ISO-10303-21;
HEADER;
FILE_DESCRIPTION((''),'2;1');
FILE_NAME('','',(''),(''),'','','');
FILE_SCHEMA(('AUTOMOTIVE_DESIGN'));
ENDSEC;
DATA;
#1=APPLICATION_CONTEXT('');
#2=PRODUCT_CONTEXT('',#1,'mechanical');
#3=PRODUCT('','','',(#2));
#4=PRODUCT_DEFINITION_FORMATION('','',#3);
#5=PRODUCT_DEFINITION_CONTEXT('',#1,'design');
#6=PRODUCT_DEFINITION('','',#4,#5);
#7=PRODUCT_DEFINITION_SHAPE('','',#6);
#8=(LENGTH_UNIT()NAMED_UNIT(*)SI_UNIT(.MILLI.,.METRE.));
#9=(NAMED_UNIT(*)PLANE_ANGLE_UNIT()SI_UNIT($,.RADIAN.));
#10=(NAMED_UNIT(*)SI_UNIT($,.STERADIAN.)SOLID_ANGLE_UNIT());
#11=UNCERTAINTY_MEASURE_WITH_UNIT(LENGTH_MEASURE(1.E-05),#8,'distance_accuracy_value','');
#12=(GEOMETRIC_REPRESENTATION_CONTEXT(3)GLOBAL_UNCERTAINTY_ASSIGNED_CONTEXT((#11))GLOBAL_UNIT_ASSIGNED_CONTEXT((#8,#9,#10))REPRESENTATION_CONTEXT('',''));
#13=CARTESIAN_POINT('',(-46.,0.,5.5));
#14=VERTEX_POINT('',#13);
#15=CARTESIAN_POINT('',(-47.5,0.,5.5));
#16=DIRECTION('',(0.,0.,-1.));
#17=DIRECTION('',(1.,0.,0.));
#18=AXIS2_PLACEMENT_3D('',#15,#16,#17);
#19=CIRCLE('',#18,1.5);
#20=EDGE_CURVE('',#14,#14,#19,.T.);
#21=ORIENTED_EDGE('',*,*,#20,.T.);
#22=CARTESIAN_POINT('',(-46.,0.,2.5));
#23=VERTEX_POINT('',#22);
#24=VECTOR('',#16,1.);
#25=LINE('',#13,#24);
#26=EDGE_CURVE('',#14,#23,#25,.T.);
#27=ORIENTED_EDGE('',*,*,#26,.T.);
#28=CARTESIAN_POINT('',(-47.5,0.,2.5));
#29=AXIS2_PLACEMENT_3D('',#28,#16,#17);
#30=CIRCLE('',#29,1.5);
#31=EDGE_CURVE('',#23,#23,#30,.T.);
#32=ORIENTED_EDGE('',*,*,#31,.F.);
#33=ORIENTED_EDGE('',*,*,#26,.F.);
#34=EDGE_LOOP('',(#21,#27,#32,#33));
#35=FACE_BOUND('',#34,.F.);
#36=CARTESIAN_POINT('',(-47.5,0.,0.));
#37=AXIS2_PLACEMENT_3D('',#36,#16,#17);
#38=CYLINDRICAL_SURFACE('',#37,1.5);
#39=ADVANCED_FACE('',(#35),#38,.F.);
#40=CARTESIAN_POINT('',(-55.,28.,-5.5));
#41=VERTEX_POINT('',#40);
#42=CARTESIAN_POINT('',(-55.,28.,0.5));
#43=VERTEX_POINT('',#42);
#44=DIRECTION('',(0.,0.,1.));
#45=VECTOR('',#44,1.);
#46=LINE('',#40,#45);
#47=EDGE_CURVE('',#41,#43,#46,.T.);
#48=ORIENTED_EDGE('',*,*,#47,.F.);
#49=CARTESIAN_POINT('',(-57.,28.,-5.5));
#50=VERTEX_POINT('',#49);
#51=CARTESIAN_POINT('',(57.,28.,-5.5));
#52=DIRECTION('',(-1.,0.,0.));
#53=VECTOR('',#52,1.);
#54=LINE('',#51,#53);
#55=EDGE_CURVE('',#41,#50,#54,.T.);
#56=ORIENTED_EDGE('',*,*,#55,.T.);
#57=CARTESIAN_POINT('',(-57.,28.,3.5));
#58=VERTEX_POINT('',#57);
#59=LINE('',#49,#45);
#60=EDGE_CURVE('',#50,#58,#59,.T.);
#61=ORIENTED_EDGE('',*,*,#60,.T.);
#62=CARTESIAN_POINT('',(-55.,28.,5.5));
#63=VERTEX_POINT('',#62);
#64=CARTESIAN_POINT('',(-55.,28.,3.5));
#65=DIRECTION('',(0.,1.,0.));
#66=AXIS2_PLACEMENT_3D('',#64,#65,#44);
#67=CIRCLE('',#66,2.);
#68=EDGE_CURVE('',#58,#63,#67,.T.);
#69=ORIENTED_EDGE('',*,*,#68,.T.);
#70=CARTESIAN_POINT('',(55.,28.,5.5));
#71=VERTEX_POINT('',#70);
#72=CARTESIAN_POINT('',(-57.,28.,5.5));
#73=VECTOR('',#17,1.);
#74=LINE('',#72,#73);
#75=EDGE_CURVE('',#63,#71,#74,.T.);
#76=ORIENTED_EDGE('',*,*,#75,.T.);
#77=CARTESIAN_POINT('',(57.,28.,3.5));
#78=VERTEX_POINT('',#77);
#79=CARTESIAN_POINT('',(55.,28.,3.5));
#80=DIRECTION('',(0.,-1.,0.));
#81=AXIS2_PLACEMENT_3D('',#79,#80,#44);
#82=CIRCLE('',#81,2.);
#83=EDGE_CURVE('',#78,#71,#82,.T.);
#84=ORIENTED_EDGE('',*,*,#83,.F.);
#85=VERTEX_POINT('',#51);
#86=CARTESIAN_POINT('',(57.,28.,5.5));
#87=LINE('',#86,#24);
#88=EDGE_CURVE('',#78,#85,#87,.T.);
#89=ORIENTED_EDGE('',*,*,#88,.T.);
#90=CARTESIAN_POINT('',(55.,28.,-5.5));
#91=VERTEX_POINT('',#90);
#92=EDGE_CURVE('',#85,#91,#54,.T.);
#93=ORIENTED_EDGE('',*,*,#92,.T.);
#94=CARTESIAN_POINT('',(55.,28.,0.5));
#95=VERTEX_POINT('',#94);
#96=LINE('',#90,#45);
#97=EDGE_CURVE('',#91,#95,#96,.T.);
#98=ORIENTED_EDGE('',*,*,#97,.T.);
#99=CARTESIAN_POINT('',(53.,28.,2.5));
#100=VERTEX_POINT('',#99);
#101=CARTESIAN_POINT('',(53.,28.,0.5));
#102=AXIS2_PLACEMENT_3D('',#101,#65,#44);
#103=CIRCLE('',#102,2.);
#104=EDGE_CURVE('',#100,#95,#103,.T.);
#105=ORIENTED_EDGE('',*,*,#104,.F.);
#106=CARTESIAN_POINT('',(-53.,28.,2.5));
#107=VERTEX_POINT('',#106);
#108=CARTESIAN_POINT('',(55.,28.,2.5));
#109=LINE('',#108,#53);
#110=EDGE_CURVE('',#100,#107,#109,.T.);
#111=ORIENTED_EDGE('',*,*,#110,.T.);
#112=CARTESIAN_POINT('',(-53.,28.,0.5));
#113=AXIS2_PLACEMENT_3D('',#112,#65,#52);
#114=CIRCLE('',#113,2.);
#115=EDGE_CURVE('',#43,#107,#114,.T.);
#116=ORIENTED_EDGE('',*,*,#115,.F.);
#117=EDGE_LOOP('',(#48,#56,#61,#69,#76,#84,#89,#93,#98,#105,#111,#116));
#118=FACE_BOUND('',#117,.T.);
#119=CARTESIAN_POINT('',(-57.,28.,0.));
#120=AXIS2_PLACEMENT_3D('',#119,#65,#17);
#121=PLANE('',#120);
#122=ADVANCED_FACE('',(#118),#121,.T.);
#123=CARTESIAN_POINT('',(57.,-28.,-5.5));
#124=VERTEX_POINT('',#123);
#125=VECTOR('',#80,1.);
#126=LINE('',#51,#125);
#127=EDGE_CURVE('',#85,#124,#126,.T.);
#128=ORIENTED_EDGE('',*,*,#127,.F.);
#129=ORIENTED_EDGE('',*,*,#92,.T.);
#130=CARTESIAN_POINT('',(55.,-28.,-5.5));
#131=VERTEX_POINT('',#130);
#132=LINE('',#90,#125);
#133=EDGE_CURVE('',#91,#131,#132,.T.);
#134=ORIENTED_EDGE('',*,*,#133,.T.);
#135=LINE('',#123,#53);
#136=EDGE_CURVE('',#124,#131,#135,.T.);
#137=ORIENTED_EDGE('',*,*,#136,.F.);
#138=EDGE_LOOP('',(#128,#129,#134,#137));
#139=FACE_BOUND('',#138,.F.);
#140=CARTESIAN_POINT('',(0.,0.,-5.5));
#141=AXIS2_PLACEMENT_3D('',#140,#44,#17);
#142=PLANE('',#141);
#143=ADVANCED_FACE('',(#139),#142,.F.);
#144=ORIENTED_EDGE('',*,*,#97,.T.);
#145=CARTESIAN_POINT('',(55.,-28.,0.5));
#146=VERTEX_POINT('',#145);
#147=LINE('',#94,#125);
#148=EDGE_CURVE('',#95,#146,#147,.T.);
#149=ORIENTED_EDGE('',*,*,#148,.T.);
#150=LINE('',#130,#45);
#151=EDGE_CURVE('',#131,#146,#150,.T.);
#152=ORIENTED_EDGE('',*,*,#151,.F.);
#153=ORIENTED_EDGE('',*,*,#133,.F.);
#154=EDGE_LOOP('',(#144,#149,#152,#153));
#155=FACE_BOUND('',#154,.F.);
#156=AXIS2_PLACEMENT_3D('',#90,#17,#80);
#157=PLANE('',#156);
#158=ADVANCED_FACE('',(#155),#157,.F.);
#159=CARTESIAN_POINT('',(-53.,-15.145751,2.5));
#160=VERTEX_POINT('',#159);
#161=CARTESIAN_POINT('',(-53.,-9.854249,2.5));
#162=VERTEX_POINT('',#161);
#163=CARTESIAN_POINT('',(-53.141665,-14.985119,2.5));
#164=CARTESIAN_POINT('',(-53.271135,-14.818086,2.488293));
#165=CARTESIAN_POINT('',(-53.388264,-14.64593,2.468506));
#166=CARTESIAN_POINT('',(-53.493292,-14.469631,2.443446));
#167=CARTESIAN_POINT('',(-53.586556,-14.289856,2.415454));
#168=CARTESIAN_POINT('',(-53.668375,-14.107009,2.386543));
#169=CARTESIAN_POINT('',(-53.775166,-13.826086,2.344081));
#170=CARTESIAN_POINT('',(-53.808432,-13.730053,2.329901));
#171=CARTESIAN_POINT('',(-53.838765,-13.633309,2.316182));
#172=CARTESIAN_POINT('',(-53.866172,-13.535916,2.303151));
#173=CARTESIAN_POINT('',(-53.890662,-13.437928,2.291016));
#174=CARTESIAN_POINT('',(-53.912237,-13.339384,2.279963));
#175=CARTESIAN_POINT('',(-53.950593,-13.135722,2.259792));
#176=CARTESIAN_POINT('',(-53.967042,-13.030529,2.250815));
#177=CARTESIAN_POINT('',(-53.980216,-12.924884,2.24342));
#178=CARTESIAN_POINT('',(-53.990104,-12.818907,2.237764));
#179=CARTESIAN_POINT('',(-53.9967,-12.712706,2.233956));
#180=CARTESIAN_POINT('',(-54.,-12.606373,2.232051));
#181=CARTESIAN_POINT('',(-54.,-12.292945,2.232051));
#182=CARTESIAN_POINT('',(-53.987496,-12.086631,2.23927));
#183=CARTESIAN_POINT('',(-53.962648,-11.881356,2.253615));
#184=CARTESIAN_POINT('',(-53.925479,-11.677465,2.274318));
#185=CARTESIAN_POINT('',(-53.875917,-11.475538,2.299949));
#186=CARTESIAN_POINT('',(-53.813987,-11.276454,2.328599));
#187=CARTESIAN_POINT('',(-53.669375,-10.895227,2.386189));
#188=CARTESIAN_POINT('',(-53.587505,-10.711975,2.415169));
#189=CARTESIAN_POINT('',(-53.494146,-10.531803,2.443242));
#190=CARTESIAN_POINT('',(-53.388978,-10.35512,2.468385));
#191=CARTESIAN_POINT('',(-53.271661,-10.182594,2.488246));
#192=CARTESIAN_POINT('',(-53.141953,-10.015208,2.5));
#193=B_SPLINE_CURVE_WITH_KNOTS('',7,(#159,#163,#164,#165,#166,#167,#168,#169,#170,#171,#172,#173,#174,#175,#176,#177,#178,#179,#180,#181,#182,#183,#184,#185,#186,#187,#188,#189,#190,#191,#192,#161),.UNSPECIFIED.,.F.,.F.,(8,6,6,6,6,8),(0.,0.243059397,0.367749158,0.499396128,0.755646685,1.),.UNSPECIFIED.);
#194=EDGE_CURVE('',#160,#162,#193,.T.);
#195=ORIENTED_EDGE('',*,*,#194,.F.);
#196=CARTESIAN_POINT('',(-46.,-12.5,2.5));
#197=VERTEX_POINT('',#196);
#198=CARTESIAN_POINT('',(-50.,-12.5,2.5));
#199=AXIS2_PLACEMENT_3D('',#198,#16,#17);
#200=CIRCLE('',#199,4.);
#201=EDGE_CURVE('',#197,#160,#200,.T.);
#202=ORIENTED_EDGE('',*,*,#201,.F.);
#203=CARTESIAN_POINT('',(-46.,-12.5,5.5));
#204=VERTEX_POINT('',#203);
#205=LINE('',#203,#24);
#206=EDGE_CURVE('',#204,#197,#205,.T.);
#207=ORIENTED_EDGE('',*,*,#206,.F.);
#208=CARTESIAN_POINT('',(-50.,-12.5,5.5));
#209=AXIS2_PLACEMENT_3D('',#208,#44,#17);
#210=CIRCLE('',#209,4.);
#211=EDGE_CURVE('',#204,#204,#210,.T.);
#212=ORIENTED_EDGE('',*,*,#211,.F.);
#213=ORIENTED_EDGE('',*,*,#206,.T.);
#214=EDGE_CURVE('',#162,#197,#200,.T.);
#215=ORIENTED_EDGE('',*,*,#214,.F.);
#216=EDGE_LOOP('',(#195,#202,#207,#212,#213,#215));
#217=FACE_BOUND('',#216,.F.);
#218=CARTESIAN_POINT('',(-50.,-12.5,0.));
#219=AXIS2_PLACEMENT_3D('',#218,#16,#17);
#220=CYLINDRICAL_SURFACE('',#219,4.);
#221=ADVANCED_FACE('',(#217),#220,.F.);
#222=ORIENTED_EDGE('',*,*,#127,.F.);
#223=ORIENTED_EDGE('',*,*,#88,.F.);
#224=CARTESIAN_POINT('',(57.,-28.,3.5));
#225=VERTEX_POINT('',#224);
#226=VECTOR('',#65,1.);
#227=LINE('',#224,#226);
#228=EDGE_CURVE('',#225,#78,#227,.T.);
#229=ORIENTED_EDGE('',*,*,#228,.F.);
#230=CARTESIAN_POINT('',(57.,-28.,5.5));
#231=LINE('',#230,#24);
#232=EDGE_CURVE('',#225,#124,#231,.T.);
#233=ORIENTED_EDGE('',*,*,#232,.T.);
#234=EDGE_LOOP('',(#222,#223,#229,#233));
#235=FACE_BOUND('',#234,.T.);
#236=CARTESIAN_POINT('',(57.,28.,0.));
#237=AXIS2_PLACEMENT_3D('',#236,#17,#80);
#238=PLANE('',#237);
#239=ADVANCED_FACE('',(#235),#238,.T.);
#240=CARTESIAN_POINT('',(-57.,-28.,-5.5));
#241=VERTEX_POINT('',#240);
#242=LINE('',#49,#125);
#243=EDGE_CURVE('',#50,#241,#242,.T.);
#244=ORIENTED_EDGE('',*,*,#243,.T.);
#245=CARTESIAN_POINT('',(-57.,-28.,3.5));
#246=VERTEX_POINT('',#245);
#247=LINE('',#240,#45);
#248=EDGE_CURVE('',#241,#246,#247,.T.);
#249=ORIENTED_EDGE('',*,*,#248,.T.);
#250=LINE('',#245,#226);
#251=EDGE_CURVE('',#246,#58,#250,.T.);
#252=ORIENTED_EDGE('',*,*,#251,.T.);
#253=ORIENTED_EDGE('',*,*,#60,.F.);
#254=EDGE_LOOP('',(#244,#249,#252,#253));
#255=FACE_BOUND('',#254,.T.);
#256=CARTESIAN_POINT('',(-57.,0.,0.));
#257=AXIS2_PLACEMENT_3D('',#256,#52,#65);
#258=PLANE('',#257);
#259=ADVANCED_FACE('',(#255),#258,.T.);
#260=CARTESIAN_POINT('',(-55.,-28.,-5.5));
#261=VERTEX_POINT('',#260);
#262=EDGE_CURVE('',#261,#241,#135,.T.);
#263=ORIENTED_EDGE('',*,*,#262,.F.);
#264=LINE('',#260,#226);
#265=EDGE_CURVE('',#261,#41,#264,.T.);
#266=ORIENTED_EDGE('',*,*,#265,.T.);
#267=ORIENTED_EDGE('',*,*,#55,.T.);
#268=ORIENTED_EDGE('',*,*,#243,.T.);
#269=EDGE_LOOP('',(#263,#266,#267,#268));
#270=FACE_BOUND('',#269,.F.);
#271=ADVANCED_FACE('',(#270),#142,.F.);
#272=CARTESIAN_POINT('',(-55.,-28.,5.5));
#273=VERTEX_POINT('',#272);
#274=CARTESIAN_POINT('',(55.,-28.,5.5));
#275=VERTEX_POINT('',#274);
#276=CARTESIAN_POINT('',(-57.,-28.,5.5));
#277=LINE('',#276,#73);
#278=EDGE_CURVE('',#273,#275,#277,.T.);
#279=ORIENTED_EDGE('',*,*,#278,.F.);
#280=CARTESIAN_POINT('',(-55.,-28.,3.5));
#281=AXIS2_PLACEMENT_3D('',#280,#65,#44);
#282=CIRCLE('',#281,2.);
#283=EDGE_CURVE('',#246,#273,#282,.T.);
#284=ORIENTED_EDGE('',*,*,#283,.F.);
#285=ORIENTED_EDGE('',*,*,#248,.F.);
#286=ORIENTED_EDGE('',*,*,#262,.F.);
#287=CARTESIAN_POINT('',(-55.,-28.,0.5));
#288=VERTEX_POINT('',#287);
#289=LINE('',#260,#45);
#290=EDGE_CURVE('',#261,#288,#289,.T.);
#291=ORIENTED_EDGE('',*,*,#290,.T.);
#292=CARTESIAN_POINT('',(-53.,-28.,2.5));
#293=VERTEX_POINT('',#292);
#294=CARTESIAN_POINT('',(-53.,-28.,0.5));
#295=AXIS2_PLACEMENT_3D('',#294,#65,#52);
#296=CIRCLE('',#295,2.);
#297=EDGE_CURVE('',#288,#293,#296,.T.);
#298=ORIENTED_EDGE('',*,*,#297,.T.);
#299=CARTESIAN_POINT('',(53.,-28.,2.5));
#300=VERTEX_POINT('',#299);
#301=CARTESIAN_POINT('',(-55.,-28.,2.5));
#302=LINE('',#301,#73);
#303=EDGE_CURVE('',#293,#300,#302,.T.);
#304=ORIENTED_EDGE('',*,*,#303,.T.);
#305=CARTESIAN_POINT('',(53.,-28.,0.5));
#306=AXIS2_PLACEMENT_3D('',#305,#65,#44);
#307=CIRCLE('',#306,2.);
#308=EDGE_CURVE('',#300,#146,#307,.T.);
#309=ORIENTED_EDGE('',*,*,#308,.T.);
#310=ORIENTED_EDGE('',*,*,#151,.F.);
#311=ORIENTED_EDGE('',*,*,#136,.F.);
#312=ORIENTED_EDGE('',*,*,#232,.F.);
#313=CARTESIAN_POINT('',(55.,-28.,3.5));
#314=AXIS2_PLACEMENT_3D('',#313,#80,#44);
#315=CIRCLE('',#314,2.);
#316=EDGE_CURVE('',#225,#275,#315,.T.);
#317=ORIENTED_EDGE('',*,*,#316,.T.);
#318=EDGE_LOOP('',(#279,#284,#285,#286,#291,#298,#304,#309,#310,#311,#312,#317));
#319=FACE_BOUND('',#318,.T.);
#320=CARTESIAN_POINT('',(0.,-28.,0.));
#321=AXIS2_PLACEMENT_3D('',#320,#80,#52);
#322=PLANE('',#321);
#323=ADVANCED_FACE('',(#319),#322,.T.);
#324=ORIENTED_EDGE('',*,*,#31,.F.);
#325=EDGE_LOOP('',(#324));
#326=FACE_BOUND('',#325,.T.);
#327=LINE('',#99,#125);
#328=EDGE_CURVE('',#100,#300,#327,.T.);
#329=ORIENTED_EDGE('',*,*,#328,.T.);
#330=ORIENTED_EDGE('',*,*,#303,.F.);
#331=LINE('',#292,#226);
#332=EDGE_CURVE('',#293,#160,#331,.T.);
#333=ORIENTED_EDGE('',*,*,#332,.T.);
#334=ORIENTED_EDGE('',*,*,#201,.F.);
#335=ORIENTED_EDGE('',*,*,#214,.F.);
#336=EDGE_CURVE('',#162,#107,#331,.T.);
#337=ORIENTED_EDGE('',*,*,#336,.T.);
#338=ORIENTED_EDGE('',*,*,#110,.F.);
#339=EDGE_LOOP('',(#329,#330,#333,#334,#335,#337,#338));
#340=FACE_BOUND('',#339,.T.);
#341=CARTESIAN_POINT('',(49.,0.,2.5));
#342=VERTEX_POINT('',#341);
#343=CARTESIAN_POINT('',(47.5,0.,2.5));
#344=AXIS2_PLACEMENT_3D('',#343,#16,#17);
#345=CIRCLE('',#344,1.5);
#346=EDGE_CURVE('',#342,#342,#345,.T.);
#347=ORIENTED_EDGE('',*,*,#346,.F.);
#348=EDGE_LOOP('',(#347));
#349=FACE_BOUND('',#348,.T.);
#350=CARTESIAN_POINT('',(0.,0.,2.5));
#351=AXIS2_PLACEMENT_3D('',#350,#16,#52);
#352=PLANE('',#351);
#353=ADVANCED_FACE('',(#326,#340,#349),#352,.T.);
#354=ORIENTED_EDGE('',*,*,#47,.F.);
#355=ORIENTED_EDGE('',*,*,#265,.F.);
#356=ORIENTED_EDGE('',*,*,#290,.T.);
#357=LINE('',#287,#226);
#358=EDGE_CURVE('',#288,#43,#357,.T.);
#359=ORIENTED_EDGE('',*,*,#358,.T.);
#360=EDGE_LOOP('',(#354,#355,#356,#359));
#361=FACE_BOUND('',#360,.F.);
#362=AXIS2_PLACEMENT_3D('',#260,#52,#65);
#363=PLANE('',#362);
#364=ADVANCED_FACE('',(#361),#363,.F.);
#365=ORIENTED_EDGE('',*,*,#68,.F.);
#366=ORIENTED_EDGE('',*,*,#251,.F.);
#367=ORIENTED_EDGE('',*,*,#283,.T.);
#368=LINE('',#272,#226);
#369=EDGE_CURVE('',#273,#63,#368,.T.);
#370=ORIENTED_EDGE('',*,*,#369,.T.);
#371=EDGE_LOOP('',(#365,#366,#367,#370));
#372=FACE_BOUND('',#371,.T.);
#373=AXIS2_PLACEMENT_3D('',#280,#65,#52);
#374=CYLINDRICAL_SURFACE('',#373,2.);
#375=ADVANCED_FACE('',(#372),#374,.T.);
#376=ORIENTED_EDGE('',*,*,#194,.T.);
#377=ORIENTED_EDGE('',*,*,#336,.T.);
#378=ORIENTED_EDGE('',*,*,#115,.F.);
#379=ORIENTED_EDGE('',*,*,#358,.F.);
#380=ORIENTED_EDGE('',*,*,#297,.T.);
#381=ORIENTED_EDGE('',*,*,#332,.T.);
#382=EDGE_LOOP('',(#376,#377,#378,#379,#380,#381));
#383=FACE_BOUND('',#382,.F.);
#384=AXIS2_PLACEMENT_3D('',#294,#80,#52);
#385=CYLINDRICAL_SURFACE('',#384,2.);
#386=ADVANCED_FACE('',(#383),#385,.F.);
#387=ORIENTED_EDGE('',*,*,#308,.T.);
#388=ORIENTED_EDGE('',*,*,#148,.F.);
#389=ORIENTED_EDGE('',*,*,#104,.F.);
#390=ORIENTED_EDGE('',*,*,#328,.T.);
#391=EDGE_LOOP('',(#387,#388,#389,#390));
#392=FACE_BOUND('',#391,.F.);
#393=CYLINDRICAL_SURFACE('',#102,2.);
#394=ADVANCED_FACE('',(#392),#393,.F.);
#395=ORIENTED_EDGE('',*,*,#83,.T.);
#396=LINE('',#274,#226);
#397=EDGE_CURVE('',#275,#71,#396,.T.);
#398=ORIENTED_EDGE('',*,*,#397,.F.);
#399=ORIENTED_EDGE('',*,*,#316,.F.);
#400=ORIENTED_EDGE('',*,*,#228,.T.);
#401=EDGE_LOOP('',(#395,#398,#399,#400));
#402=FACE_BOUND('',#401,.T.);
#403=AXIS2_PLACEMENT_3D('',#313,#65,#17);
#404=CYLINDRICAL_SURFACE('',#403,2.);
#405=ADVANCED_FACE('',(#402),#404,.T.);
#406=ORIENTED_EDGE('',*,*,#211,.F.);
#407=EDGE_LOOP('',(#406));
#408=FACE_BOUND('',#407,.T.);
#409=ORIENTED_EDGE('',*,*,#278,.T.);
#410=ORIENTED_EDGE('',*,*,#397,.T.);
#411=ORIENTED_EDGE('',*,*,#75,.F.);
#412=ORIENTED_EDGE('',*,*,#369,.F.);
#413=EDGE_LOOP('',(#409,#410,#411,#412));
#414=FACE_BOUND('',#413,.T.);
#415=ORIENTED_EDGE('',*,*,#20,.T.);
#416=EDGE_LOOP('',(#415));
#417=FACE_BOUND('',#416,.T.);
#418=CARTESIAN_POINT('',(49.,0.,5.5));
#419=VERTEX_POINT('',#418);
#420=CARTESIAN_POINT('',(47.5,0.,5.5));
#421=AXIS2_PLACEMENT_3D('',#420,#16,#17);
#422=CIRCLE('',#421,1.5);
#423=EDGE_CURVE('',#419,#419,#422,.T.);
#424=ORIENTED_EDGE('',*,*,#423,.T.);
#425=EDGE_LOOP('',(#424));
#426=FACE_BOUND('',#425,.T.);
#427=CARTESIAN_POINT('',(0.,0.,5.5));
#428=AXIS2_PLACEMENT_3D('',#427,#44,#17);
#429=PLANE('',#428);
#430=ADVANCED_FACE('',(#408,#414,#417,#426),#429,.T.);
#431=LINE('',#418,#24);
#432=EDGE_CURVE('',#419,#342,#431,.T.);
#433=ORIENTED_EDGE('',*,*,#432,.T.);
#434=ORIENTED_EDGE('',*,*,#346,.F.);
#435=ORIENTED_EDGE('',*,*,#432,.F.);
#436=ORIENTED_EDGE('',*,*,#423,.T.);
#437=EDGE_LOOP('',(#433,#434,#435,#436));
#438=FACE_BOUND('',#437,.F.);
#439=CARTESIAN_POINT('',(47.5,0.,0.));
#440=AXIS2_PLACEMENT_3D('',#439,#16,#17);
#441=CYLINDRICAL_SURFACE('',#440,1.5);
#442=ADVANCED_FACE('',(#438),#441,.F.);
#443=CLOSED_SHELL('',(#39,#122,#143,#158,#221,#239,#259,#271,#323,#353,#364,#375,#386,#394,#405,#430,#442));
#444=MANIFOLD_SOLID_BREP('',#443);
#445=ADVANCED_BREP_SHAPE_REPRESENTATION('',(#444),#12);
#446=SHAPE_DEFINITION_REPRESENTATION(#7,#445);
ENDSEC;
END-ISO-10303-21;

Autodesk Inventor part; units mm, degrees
sketch "Skizze1" plane through (0, 0, 0) normal (0, 0, 1) x (1, 0, 0)
  line L0 (-57, 28) -> (57, 28)
  line L1 (57, 28) -> (57, -28)
  line L2 (57, -28) -> (-57, -28)
  line L3 (-57, -28) -> (-57, 28)
  line L4 (0, -39.2) -> (0, 39.2) projected
  line L5 (-79.8, 0) -> (79.8, 0) projected
  circle A0 centre (-47.5, 0) radius 1.5
  circle A1 centre (47.5, 0) radius 1.5
  circle A2 centre (-50, -12.5) radius 4
  point P0 (0, 0)
  dimension "d0" = 114
  dimension "d1" = 56
  dimension "d2" = 3
  dimension "d3" = 47.5
  dimension "d4" = 8
  dimension "d5" = 40.5
  dimension "d6" = 7
extrude "Extrusion1" add sketch "Skizze1" along normal mid plane 11 contours L0 L4 L5 A0 L3 | L0 L1 L5 A1 L4 | L5 A0 L4 L2 L3 | L5 A1 L1 L2 L4
sketch "Skizze2" plane through (0, 0, -5.5) normal (0, 0, -1) x (-1, 0, 0)
  line L0 (57, -28) -> (57, 28) projected
  line L1 (-57, 28) -> (-57, -28) projected
  line L2 (55, -28) -> (55, 28)
  line L3 (-55, 28) -> (-55, -28)
  line L4 (55, -28) -> (-55, -28)
  line L5 (-55, 28) -> (55, 28)
  line L6 (-57, 28) -> (57, 28) projected
  point P0 (0, 0)
  dimension "d9" = 2
  dimension "d10" = 2
extrude "Extrusion2" cut sketch "Skizze2" against normal blind 8
fillet "Rundung1" radius 2 2 edges at (-57, 0, 5.5) (57, 0, 5.5)
fillet "Rundung2" radius 2 2 edges at (-55, 0, 2.5) (55, 0, 2.5)
properties part number "KarosserieDachTeil4"
